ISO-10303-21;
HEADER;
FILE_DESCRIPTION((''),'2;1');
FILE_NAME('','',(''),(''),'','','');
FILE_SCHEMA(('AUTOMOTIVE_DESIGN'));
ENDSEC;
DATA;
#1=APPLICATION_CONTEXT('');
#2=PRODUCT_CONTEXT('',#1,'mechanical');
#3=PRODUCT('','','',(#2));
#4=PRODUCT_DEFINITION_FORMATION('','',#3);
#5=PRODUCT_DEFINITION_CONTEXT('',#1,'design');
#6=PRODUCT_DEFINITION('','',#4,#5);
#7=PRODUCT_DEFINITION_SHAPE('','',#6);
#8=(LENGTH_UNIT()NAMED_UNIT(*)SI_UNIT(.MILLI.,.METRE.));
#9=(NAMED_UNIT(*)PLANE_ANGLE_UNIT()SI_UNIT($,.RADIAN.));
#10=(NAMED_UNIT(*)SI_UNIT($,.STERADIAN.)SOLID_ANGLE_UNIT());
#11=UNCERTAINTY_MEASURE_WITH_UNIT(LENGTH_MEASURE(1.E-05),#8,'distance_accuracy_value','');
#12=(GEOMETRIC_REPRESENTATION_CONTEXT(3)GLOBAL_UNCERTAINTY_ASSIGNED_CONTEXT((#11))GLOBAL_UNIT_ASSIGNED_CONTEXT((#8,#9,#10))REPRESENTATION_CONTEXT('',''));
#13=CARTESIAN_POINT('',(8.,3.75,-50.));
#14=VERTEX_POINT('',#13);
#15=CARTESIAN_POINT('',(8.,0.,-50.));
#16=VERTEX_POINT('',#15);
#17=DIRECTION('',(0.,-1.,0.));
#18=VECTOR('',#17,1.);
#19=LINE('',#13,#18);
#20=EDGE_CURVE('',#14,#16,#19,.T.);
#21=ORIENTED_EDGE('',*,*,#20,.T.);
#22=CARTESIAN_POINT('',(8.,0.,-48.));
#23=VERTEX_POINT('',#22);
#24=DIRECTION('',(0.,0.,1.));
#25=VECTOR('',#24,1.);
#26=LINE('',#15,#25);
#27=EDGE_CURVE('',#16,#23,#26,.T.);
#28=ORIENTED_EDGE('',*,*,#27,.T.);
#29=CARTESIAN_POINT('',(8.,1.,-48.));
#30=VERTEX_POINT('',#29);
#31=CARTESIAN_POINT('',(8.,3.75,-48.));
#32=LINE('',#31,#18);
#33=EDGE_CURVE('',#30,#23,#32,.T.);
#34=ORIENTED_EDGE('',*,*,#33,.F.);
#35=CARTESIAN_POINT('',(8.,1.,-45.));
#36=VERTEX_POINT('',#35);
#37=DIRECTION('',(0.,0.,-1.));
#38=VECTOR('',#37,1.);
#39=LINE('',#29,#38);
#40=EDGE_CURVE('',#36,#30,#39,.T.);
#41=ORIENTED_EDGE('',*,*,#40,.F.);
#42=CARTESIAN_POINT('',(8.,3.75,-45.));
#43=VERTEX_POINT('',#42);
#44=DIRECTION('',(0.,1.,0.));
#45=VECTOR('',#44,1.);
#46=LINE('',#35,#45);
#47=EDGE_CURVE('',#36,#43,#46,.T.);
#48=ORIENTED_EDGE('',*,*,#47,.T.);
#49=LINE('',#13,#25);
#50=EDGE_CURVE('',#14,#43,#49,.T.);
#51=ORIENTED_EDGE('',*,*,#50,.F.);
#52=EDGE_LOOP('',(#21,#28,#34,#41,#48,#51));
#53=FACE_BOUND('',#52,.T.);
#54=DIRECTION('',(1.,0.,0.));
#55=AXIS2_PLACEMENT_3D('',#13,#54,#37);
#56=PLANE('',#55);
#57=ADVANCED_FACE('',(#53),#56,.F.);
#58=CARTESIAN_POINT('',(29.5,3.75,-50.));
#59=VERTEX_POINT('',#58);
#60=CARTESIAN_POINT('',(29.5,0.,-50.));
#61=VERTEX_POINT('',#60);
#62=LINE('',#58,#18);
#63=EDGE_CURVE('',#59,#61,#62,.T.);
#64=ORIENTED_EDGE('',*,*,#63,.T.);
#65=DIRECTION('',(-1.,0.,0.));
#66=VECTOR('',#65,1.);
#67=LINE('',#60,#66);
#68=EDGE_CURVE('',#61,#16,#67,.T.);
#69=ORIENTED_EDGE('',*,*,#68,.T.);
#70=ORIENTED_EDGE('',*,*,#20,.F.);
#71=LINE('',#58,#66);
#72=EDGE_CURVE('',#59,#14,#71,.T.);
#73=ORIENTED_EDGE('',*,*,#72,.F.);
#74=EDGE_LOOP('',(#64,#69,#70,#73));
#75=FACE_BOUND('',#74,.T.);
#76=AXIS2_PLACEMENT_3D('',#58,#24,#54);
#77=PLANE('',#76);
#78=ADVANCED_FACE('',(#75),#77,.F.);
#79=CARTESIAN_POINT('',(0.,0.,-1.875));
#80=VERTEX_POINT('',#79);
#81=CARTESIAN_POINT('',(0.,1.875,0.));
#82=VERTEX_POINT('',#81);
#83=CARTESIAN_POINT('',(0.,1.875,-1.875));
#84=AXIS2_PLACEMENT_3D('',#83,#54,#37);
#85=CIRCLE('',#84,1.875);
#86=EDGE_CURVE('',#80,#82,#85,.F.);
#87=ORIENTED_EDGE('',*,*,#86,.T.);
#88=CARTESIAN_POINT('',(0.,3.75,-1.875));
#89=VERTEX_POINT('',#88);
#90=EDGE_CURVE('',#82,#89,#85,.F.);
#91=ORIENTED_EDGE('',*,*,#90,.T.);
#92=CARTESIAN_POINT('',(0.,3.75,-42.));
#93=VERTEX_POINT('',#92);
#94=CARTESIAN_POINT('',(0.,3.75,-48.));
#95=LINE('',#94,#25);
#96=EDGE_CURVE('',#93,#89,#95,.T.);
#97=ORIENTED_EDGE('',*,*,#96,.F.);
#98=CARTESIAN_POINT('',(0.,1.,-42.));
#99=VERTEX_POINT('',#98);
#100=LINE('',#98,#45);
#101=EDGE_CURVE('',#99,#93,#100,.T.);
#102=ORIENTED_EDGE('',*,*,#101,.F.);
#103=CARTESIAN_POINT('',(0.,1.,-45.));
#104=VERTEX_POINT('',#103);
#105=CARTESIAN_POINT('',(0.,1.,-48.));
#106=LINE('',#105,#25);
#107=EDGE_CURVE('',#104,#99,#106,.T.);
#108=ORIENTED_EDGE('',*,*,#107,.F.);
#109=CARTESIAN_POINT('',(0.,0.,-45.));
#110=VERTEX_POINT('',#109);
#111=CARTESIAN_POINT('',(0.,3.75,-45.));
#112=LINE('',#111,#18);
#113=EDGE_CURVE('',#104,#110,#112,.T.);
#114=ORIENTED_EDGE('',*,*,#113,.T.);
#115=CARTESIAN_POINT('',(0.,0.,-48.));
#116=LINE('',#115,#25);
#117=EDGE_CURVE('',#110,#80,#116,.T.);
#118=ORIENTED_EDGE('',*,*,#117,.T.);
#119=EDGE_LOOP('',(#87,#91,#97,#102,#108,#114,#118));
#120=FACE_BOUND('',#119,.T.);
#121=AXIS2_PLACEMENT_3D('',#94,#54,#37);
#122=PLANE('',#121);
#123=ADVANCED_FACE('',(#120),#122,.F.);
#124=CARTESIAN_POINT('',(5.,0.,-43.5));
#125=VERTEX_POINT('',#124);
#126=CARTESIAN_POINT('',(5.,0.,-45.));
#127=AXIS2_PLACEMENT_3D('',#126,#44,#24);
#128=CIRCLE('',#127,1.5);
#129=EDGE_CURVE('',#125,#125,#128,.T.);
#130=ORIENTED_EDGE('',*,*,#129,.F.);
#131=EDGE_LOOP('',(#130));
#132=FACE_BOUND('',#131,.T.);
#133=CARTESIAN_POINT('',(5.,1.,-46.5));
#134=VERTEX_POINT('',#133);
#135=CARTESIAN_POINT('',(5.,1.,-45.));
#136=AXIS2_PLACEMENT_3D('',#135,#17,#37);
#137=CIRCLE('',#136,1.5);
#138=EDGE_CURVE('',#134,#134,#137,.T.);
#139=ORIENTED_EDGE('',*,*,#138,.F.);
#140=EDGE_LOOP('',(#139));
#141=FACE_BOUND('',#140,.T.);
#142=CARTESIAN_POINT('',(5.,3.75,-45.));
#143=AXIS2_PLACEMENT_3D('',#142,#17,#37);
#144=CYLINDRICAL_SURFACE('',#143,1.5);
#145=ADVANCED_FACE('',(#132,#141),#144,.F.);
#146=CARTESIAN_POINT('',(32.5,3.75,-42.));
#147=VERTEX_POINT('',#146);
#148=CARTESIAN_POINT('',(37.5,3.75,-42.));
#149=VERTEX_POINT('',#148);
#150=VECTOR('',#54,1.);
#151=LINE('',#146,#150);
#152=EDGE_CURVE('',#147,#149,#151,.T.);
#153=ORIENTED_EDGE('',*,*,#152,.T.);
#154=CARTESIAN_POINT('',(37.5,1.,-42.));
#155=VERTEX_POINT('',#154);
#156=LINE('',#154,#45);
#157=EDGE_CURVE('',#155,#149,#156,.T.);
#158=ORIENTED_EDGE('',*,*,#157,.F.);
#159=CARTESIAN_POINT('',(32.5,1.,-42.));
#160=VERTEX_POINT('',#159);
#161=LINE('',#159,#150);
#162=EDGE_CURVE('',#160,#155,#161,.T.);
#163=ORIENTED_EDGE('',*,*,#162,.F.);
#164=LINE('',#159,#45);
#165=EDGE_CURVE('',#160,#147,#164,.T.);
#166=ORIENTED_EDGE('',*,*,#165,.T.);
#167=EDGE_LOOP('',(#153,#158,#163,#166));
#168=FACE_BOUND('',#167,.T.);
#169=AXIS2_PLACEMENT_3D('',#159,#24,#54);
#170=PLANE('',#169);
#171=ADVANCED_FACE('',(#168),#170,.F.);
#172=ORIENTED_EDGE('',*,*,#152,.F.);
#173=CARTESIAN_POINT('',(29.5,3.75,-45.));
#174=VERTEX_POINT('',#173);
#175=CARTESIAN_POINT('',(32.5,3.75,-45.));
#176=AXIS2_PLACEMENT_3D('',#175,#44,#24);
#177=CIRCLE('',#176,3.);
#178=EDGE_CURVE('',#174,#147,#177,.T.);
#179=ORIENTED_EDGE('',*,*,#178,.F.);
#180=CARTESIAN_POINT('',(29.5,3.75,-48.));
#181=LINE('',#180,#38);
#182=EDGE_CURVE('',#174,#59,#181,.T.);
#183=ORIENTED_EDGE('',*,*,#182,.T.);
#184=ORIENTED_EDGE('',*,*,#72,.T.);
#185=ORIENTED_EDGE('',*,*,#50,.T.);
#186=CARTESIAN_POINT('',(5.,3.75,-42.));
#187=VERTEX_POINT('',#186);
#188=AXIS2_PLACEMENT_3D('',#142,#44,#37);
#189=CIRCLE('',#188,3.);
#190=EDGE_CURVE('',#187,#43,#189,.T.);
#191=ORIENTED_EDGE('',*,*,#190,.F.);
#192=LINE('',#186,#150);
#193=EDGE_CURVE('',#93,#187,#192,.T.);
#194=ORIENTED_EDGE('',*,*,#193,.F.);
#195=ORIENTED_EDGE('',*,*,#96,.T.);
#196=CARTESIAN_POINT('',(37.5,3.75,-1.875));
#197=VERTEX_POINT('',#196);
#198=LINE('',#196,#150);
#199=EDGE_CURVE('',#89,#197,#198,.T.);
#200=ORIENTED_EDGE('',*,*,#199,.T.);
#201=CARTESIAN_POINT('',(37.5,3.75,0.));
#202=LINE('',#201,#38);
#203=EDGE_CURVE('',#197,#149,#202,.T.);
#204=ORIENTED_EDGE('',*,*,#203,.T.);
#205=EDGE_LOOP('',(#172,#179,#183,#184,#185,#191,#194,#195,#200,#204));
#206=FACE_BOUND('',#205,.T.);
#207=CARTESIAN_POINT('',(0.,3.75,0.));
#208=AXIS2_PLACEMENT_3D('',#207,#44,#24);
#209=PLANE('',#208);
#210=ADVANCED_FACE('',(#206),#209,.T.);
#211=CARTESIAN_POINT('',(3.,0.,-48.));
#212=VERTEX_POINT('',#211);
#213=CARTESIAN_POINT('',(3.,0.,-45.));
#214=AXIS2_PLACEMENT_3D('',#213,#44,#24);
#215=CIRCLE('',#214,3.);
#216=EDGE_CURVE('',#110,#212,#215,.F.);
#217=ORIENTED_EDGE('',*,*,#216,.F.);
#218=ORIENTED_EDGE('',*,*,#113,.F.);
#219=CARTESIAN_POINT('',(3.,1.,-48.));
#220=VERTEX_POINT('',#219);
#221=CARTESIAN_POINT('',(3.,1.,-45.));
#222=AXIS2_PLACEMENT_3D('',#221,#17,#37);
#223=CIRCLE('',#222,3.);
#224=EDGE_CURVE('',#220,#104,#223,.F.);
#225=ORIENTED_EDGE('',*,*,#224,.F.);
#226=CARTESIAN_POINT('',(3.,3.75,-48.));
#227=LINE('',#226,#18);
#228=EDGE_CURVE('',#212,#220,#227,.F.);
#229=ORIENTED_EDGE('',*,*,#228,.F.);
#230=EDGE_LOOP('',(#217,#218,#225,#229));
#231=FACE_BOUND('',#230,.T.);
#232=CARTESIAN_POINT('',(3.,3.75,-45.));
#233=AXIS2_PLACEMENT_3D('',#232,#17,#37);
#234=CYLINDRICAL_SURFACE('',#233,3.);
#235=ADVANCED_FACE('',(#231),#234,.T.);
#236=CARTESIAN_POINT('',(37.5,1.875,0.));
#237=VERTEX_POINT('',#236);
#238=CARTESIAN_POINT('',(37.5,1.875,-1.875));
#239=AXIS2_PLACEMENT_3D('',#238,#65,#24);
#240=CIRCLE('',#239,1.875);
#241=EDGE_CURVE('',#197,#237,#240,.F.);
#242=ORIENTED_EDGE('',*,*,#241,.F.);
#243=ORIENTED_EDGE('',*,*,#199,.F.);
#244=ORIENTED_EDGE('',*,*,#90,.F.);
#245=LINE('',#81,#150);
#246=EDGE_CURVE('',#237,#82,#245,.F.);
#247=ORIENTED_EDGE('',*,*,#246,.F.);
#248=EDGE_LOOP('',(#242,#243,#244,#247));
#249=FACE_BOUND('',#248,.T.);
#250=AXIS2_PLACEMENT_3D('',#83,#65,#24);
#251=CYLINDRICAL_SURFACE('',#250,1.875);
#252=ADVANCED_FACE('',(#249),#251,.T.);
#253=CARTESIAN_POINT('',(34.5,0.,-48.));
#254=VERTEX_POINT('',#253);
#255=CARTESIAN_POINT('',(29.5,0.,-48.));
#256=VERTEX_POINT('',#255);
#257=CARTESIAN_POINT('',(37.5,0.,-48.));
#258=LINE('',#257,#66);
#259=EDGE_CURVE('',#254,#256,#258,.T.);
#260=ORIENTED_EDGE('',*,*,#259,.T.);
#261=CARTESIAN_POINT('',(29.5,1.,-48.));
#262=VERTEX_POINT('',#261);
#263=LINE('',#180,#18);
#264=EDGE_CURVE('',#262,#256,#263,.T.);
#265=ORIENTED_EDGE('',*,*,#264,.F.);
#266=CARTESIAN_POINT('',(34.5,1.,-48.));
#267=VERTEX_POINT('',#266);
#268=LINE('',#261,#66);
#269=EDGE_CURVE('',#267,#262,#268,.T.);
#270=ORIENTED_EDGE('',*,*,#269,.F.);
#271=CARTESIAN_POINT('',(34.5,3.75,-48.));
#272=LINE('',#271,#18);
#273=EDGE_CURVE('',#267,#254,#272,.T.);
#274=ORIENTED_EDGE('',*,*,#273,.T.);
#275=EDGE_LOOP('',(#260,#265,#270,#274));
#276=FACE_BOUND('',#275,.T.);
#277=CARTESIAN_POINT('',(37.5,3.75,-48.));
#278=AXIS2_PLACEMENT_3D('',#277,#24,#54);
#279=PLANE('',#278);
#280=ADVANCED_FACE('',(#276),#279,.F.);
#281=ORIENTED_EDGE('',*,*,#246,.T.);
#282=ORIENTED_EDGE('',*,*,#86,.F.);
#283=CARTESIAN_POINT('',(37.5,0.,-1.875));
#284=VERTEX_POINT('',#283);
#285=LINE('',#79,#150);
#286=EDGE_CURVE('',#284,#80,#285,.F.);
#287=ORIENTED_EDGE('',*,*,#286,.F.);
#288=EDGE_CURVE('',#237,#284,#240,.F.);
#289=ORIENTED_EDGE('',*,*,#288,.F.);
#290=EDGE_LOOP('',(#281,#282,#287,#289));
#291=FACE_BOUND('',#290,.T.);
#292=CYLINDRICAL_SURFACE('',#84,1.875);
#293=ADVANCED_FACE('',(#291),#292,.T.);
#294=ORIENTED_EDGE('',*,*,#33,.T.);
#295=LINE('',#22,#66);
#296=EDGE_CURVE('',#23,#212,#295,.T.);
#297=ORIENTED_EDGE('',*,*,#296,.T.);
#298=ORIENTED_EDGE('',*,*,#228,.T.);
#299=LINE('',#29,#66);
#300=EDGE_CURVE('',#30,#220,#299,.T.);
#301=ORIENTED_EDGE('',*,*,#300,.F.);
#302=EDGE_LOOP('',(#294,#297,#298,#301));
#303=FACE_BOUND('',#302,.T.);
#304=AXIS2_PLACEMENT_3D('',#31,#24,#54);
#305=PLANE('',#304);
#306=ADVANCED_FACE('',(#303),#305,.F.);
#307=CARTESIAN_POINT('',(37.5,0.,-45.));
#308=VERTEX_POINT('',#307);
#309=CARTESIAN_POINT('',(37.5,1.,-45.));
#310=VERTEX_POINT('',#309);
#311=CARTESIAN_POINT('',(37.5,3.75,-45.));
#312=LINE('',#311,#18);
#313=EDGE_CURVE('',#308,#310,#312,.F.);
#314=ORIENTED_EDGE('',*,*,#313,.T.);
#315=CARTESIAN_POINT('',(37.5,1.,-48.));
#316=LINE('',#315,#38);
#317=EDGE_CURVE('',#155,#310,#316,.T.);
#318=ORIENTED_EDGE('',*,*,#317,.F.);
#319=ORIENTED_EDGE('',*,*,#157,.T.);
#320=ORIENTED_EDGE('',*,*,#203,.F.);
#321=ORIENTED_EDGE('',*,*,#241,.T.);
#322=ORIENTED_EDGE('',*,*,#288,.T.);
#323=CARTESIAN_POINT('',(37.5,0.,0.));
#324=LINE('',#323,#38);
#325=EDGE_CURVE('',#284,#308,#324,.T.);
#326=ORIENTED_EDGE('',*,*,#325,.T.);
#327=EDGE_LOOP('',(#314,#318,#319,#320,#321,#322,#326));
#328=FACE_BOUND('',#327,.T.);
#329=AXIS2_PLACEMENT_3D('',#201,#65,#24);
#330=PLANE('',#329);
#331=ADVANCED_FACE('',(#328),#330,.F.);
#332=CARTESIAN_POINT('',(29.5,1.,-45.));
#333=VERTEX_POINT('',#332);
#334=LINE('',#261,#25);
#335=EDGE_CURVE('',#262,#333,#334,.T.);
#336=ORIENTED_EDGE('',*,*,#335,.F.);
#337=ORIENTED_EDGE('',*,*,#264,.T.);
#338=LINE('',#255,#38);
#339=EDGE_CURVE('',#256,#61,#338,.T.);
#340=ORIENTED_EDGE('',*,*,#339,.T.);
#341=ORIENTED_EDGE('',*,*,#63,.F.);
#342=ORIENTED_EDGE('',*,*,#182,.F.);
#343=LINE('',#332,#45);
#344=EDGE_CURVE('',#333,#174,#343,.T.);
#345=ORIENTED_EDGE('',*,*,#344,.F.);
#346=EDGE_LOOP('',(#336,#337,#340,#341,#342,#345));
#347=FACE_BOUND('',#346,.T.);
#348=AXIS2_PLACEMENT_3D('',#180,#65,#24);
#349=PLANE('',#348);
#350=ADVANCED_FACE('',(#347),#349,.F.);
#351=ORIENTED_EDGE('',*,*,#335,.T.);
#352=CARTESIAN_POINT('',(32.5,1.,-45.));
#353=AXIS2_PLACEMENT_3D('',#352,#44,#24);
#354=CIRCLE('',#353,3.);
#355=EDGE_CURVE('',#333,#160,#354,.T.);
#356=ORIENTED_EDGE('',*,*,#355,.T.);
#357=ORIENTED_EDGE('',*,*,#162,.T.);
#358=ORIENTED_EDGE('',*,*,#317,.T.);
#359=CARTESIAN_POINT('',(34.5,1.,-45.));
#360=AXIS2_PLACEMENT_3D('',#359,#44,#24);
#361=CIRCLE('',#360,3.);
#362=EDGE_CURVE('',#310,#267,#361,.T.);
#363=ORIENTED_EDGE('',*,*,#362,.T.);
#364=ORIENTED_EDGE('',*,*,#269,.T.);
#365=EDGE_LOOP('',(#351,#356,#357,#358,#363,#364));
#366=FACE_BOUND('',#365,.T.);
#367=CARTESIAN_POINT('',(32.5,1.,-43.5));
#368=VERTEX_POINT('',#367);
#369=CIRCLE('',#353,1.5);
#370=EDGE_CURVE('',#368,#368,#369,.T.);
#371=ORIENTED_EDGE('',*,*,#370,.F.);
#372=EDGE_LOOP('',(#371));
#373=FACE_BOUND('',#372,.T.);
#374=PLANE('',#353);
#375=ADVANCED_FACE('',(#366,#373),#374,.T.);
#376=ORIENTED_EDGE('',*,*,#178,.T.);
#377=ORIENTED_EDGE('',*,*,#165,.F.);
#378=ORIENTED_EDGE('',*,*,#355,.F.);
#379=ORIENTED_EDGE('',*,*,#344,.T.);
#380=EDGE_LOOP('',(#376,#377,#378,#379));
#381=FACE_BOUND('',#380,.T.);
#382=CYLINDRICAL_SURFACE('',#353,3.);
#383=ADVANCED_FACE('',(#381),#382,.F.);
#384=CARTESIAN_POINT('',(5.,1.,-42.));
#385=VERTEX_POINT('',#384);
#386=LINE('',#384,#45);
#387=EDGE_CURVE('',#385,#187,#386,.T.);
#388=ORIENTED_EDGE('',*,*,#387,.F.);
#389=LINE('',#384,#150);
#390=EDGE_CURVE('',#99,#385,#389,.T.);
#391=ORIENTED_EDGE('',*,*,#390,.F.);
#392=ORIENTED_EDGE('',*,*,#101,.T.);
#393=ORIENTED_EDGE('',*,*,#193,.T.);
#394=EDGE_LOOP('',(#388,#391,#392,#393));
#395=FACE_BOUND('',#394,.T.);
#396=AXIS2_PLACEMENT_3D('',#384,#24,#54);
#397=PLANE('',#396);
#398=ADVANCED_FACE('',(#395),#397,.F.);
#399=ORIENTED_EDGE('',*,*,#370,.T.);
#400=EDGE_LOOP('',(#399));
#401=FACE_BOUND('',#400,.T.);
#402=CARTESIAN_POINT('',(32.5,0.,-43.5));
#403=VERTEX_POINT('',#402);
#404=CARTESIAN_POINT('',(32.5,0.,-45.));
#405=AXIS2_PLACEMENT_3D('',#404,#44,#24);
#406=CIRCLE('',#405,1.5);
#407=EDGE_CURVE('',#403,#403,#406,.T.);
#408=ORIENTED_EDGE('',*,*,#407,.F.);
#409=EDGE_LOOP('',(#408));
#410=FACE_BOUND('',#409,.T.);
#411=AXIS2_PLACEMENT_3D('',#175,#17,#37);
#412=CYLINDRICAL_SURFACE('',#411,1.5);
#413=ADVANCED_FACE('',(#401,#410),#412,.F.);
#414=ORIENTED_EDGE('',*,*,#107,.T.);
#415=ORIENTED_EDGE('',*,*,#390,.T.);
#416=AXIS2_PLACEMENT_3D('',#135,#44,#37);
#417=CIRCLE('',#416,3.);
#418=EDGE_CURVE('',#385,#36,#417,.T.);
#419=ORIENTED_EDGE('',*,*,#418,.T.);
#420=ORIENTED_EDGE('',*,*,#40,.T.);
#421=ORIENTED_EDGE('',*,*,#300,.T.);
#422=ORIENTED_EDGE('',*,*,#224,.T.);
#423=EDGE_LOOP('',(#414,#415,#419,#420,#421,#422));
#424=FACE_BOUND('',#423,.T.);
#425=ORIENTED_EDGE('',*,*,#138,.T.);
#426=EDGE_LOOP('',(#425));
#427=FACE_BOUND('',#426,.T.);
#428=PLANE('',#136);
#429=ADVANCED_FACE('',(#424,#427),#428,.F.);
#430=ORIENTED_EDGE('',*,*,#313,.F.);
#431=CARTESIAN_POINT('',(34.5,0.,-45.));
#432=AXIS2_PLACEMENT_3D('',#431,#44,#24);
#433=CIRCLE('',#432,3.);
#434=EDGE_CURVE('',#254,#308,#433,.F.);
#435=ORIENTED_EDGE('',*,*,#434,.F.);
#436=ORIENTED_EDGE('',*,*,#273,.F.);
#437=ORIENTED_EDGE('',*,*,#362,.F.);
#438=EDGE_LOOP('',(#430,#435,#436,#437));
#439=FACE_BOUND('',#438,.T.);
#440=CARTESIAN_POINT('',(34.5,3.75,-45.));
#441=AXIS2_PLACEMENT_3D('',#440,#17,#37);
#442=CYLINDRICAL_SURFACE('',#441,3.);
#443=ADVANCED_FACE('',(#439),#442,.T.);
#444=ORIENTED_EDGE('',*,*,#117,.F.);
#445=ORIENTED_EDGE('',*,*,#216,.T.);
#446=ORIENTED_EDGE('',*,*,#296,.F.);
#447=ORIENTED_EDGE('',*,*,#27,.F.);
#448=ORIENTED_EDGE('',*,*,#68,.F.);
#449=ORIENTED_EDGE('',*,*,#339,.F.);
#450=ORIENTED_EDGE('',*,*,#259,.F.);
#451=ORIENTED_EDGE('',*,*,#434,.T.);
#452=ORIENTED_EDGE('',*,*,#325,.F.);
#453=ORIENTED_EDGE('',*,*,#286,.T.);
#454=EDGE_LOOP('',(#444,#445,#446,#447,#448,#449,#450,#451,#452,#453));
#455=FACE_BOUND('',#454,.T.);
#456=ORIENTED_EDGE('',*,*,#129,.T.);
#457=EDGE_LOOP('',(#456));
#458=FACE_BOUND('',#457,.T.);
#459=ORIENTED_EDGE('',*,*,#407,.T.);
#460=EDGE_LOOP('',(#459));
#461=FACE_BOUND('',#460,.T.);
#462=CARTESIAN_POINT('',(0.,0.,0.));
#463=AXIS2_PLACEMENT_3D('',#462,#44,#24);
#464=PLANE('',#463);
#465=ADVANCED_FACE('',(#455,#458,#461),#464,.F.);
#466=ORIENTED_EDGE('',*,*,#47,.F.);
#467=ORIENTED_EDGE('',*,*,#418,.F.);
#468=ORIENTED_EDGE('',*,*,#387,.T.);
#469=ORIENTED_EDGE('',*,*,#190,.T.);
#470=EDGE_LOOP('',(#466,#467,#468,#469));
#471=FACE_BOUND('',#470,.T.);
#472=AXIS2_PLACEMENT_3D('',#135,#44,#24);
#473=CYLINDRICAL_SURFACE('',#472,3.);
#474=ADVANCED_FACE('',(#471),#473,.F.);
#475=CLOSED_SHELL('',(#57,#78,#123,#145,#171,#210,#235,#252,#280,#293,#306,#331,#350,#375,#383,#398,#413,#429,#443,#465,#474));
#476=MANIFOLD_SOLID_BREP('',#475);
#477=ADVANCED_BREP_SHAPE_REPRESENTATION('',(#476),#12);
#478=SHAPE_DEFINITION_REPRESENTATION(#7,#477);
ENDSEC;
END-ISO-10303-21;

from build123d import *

# Parameters (mm, degrees)
SKETCH1_R           = 1.5
BOSS_EXTRUDE1_DEPTH = 3.75
FILLET1_R           = 1.875
CUT_EXTRUDE1_DEPTH  = 2.75
FILLET2_R           = 3


with BuildPart() as part:
    # Sketch1 → Boss-Extrude1 (new body)
    with BuildSketch(Plane(origin=(0, 0, 0), x_dir=(1, 0, 0), z_dir=(0, 1, 0))):
        Polygon((0, 0), (37.5, 0), (37.5, 48), (29.5, 48), (29.5, 50), (8, 50), (8, 48), (0, 48), align=None)
        with Locations(Location((5, 45, 0), (0, 0, 270))):
            Circle(SKETCH1_R, mode=Mode.SUBTRACT)
        with Locations(Location((32.5, 45, 0), (0, 0, 270))):
            Circle(SKETCH1_R, mode=Mode.SUBTRACT)
    extrude(amount=BOSS_EXTRUDE1_DEPTH)

    # Fillet1
    fillet1_edges = [part.edges().sort_by_distance(p)[0] for p in [
        (18.75, 0, 0),
        (18.75, 3.75, 0),
    ]]
    fillet(fillet1_edges, radius=FILLET1_R - 0.0001)  # a hair under: the kernel refuses the full size

    # Sketch2 → Cut-Extrude1 (cut)
    with BuildSketch(Plane(origin=(0, 3.75, 0), x_dir=(1, 0, 0), z_dir=(0, 1, 0))):
        with BuildLine():
            Line((8, 48), (0, 48))
            Line((0, 48), (0, 42))
            Line((0, 42), (5, 42))
            ThreePointArc((5, 42), (7.121320344, 42.878679656), (8, 45))
            Line((8, 45), (8, 48))
        make_face()
        with BuildLine():
            Line((29.5, 48), (37.5, 48))
            Line((37.5, 48), (37.5, 42))
            Line((37.5, 42), (32.5, 42))
            ThreePointArc((32.5, 42), (30.378679656, 42.878679656), (29.5, 45))
            Line((29.5, 45), (29.5, 48))
        make_face()
    extrude(amount=-CUT_EXTRUDE1_DEPTH, mode=Mode.SUBTRACT)

    # Fillet2
    fillet2_edges = [part.edges().sort_by_distance(p)[0] for p in [
        (0, 0.5, -48),
        (37.5, 0.5, -48),
    ]]
    fillet(fillet2_edges, radius=FILLET2_R)


solid = part.part
